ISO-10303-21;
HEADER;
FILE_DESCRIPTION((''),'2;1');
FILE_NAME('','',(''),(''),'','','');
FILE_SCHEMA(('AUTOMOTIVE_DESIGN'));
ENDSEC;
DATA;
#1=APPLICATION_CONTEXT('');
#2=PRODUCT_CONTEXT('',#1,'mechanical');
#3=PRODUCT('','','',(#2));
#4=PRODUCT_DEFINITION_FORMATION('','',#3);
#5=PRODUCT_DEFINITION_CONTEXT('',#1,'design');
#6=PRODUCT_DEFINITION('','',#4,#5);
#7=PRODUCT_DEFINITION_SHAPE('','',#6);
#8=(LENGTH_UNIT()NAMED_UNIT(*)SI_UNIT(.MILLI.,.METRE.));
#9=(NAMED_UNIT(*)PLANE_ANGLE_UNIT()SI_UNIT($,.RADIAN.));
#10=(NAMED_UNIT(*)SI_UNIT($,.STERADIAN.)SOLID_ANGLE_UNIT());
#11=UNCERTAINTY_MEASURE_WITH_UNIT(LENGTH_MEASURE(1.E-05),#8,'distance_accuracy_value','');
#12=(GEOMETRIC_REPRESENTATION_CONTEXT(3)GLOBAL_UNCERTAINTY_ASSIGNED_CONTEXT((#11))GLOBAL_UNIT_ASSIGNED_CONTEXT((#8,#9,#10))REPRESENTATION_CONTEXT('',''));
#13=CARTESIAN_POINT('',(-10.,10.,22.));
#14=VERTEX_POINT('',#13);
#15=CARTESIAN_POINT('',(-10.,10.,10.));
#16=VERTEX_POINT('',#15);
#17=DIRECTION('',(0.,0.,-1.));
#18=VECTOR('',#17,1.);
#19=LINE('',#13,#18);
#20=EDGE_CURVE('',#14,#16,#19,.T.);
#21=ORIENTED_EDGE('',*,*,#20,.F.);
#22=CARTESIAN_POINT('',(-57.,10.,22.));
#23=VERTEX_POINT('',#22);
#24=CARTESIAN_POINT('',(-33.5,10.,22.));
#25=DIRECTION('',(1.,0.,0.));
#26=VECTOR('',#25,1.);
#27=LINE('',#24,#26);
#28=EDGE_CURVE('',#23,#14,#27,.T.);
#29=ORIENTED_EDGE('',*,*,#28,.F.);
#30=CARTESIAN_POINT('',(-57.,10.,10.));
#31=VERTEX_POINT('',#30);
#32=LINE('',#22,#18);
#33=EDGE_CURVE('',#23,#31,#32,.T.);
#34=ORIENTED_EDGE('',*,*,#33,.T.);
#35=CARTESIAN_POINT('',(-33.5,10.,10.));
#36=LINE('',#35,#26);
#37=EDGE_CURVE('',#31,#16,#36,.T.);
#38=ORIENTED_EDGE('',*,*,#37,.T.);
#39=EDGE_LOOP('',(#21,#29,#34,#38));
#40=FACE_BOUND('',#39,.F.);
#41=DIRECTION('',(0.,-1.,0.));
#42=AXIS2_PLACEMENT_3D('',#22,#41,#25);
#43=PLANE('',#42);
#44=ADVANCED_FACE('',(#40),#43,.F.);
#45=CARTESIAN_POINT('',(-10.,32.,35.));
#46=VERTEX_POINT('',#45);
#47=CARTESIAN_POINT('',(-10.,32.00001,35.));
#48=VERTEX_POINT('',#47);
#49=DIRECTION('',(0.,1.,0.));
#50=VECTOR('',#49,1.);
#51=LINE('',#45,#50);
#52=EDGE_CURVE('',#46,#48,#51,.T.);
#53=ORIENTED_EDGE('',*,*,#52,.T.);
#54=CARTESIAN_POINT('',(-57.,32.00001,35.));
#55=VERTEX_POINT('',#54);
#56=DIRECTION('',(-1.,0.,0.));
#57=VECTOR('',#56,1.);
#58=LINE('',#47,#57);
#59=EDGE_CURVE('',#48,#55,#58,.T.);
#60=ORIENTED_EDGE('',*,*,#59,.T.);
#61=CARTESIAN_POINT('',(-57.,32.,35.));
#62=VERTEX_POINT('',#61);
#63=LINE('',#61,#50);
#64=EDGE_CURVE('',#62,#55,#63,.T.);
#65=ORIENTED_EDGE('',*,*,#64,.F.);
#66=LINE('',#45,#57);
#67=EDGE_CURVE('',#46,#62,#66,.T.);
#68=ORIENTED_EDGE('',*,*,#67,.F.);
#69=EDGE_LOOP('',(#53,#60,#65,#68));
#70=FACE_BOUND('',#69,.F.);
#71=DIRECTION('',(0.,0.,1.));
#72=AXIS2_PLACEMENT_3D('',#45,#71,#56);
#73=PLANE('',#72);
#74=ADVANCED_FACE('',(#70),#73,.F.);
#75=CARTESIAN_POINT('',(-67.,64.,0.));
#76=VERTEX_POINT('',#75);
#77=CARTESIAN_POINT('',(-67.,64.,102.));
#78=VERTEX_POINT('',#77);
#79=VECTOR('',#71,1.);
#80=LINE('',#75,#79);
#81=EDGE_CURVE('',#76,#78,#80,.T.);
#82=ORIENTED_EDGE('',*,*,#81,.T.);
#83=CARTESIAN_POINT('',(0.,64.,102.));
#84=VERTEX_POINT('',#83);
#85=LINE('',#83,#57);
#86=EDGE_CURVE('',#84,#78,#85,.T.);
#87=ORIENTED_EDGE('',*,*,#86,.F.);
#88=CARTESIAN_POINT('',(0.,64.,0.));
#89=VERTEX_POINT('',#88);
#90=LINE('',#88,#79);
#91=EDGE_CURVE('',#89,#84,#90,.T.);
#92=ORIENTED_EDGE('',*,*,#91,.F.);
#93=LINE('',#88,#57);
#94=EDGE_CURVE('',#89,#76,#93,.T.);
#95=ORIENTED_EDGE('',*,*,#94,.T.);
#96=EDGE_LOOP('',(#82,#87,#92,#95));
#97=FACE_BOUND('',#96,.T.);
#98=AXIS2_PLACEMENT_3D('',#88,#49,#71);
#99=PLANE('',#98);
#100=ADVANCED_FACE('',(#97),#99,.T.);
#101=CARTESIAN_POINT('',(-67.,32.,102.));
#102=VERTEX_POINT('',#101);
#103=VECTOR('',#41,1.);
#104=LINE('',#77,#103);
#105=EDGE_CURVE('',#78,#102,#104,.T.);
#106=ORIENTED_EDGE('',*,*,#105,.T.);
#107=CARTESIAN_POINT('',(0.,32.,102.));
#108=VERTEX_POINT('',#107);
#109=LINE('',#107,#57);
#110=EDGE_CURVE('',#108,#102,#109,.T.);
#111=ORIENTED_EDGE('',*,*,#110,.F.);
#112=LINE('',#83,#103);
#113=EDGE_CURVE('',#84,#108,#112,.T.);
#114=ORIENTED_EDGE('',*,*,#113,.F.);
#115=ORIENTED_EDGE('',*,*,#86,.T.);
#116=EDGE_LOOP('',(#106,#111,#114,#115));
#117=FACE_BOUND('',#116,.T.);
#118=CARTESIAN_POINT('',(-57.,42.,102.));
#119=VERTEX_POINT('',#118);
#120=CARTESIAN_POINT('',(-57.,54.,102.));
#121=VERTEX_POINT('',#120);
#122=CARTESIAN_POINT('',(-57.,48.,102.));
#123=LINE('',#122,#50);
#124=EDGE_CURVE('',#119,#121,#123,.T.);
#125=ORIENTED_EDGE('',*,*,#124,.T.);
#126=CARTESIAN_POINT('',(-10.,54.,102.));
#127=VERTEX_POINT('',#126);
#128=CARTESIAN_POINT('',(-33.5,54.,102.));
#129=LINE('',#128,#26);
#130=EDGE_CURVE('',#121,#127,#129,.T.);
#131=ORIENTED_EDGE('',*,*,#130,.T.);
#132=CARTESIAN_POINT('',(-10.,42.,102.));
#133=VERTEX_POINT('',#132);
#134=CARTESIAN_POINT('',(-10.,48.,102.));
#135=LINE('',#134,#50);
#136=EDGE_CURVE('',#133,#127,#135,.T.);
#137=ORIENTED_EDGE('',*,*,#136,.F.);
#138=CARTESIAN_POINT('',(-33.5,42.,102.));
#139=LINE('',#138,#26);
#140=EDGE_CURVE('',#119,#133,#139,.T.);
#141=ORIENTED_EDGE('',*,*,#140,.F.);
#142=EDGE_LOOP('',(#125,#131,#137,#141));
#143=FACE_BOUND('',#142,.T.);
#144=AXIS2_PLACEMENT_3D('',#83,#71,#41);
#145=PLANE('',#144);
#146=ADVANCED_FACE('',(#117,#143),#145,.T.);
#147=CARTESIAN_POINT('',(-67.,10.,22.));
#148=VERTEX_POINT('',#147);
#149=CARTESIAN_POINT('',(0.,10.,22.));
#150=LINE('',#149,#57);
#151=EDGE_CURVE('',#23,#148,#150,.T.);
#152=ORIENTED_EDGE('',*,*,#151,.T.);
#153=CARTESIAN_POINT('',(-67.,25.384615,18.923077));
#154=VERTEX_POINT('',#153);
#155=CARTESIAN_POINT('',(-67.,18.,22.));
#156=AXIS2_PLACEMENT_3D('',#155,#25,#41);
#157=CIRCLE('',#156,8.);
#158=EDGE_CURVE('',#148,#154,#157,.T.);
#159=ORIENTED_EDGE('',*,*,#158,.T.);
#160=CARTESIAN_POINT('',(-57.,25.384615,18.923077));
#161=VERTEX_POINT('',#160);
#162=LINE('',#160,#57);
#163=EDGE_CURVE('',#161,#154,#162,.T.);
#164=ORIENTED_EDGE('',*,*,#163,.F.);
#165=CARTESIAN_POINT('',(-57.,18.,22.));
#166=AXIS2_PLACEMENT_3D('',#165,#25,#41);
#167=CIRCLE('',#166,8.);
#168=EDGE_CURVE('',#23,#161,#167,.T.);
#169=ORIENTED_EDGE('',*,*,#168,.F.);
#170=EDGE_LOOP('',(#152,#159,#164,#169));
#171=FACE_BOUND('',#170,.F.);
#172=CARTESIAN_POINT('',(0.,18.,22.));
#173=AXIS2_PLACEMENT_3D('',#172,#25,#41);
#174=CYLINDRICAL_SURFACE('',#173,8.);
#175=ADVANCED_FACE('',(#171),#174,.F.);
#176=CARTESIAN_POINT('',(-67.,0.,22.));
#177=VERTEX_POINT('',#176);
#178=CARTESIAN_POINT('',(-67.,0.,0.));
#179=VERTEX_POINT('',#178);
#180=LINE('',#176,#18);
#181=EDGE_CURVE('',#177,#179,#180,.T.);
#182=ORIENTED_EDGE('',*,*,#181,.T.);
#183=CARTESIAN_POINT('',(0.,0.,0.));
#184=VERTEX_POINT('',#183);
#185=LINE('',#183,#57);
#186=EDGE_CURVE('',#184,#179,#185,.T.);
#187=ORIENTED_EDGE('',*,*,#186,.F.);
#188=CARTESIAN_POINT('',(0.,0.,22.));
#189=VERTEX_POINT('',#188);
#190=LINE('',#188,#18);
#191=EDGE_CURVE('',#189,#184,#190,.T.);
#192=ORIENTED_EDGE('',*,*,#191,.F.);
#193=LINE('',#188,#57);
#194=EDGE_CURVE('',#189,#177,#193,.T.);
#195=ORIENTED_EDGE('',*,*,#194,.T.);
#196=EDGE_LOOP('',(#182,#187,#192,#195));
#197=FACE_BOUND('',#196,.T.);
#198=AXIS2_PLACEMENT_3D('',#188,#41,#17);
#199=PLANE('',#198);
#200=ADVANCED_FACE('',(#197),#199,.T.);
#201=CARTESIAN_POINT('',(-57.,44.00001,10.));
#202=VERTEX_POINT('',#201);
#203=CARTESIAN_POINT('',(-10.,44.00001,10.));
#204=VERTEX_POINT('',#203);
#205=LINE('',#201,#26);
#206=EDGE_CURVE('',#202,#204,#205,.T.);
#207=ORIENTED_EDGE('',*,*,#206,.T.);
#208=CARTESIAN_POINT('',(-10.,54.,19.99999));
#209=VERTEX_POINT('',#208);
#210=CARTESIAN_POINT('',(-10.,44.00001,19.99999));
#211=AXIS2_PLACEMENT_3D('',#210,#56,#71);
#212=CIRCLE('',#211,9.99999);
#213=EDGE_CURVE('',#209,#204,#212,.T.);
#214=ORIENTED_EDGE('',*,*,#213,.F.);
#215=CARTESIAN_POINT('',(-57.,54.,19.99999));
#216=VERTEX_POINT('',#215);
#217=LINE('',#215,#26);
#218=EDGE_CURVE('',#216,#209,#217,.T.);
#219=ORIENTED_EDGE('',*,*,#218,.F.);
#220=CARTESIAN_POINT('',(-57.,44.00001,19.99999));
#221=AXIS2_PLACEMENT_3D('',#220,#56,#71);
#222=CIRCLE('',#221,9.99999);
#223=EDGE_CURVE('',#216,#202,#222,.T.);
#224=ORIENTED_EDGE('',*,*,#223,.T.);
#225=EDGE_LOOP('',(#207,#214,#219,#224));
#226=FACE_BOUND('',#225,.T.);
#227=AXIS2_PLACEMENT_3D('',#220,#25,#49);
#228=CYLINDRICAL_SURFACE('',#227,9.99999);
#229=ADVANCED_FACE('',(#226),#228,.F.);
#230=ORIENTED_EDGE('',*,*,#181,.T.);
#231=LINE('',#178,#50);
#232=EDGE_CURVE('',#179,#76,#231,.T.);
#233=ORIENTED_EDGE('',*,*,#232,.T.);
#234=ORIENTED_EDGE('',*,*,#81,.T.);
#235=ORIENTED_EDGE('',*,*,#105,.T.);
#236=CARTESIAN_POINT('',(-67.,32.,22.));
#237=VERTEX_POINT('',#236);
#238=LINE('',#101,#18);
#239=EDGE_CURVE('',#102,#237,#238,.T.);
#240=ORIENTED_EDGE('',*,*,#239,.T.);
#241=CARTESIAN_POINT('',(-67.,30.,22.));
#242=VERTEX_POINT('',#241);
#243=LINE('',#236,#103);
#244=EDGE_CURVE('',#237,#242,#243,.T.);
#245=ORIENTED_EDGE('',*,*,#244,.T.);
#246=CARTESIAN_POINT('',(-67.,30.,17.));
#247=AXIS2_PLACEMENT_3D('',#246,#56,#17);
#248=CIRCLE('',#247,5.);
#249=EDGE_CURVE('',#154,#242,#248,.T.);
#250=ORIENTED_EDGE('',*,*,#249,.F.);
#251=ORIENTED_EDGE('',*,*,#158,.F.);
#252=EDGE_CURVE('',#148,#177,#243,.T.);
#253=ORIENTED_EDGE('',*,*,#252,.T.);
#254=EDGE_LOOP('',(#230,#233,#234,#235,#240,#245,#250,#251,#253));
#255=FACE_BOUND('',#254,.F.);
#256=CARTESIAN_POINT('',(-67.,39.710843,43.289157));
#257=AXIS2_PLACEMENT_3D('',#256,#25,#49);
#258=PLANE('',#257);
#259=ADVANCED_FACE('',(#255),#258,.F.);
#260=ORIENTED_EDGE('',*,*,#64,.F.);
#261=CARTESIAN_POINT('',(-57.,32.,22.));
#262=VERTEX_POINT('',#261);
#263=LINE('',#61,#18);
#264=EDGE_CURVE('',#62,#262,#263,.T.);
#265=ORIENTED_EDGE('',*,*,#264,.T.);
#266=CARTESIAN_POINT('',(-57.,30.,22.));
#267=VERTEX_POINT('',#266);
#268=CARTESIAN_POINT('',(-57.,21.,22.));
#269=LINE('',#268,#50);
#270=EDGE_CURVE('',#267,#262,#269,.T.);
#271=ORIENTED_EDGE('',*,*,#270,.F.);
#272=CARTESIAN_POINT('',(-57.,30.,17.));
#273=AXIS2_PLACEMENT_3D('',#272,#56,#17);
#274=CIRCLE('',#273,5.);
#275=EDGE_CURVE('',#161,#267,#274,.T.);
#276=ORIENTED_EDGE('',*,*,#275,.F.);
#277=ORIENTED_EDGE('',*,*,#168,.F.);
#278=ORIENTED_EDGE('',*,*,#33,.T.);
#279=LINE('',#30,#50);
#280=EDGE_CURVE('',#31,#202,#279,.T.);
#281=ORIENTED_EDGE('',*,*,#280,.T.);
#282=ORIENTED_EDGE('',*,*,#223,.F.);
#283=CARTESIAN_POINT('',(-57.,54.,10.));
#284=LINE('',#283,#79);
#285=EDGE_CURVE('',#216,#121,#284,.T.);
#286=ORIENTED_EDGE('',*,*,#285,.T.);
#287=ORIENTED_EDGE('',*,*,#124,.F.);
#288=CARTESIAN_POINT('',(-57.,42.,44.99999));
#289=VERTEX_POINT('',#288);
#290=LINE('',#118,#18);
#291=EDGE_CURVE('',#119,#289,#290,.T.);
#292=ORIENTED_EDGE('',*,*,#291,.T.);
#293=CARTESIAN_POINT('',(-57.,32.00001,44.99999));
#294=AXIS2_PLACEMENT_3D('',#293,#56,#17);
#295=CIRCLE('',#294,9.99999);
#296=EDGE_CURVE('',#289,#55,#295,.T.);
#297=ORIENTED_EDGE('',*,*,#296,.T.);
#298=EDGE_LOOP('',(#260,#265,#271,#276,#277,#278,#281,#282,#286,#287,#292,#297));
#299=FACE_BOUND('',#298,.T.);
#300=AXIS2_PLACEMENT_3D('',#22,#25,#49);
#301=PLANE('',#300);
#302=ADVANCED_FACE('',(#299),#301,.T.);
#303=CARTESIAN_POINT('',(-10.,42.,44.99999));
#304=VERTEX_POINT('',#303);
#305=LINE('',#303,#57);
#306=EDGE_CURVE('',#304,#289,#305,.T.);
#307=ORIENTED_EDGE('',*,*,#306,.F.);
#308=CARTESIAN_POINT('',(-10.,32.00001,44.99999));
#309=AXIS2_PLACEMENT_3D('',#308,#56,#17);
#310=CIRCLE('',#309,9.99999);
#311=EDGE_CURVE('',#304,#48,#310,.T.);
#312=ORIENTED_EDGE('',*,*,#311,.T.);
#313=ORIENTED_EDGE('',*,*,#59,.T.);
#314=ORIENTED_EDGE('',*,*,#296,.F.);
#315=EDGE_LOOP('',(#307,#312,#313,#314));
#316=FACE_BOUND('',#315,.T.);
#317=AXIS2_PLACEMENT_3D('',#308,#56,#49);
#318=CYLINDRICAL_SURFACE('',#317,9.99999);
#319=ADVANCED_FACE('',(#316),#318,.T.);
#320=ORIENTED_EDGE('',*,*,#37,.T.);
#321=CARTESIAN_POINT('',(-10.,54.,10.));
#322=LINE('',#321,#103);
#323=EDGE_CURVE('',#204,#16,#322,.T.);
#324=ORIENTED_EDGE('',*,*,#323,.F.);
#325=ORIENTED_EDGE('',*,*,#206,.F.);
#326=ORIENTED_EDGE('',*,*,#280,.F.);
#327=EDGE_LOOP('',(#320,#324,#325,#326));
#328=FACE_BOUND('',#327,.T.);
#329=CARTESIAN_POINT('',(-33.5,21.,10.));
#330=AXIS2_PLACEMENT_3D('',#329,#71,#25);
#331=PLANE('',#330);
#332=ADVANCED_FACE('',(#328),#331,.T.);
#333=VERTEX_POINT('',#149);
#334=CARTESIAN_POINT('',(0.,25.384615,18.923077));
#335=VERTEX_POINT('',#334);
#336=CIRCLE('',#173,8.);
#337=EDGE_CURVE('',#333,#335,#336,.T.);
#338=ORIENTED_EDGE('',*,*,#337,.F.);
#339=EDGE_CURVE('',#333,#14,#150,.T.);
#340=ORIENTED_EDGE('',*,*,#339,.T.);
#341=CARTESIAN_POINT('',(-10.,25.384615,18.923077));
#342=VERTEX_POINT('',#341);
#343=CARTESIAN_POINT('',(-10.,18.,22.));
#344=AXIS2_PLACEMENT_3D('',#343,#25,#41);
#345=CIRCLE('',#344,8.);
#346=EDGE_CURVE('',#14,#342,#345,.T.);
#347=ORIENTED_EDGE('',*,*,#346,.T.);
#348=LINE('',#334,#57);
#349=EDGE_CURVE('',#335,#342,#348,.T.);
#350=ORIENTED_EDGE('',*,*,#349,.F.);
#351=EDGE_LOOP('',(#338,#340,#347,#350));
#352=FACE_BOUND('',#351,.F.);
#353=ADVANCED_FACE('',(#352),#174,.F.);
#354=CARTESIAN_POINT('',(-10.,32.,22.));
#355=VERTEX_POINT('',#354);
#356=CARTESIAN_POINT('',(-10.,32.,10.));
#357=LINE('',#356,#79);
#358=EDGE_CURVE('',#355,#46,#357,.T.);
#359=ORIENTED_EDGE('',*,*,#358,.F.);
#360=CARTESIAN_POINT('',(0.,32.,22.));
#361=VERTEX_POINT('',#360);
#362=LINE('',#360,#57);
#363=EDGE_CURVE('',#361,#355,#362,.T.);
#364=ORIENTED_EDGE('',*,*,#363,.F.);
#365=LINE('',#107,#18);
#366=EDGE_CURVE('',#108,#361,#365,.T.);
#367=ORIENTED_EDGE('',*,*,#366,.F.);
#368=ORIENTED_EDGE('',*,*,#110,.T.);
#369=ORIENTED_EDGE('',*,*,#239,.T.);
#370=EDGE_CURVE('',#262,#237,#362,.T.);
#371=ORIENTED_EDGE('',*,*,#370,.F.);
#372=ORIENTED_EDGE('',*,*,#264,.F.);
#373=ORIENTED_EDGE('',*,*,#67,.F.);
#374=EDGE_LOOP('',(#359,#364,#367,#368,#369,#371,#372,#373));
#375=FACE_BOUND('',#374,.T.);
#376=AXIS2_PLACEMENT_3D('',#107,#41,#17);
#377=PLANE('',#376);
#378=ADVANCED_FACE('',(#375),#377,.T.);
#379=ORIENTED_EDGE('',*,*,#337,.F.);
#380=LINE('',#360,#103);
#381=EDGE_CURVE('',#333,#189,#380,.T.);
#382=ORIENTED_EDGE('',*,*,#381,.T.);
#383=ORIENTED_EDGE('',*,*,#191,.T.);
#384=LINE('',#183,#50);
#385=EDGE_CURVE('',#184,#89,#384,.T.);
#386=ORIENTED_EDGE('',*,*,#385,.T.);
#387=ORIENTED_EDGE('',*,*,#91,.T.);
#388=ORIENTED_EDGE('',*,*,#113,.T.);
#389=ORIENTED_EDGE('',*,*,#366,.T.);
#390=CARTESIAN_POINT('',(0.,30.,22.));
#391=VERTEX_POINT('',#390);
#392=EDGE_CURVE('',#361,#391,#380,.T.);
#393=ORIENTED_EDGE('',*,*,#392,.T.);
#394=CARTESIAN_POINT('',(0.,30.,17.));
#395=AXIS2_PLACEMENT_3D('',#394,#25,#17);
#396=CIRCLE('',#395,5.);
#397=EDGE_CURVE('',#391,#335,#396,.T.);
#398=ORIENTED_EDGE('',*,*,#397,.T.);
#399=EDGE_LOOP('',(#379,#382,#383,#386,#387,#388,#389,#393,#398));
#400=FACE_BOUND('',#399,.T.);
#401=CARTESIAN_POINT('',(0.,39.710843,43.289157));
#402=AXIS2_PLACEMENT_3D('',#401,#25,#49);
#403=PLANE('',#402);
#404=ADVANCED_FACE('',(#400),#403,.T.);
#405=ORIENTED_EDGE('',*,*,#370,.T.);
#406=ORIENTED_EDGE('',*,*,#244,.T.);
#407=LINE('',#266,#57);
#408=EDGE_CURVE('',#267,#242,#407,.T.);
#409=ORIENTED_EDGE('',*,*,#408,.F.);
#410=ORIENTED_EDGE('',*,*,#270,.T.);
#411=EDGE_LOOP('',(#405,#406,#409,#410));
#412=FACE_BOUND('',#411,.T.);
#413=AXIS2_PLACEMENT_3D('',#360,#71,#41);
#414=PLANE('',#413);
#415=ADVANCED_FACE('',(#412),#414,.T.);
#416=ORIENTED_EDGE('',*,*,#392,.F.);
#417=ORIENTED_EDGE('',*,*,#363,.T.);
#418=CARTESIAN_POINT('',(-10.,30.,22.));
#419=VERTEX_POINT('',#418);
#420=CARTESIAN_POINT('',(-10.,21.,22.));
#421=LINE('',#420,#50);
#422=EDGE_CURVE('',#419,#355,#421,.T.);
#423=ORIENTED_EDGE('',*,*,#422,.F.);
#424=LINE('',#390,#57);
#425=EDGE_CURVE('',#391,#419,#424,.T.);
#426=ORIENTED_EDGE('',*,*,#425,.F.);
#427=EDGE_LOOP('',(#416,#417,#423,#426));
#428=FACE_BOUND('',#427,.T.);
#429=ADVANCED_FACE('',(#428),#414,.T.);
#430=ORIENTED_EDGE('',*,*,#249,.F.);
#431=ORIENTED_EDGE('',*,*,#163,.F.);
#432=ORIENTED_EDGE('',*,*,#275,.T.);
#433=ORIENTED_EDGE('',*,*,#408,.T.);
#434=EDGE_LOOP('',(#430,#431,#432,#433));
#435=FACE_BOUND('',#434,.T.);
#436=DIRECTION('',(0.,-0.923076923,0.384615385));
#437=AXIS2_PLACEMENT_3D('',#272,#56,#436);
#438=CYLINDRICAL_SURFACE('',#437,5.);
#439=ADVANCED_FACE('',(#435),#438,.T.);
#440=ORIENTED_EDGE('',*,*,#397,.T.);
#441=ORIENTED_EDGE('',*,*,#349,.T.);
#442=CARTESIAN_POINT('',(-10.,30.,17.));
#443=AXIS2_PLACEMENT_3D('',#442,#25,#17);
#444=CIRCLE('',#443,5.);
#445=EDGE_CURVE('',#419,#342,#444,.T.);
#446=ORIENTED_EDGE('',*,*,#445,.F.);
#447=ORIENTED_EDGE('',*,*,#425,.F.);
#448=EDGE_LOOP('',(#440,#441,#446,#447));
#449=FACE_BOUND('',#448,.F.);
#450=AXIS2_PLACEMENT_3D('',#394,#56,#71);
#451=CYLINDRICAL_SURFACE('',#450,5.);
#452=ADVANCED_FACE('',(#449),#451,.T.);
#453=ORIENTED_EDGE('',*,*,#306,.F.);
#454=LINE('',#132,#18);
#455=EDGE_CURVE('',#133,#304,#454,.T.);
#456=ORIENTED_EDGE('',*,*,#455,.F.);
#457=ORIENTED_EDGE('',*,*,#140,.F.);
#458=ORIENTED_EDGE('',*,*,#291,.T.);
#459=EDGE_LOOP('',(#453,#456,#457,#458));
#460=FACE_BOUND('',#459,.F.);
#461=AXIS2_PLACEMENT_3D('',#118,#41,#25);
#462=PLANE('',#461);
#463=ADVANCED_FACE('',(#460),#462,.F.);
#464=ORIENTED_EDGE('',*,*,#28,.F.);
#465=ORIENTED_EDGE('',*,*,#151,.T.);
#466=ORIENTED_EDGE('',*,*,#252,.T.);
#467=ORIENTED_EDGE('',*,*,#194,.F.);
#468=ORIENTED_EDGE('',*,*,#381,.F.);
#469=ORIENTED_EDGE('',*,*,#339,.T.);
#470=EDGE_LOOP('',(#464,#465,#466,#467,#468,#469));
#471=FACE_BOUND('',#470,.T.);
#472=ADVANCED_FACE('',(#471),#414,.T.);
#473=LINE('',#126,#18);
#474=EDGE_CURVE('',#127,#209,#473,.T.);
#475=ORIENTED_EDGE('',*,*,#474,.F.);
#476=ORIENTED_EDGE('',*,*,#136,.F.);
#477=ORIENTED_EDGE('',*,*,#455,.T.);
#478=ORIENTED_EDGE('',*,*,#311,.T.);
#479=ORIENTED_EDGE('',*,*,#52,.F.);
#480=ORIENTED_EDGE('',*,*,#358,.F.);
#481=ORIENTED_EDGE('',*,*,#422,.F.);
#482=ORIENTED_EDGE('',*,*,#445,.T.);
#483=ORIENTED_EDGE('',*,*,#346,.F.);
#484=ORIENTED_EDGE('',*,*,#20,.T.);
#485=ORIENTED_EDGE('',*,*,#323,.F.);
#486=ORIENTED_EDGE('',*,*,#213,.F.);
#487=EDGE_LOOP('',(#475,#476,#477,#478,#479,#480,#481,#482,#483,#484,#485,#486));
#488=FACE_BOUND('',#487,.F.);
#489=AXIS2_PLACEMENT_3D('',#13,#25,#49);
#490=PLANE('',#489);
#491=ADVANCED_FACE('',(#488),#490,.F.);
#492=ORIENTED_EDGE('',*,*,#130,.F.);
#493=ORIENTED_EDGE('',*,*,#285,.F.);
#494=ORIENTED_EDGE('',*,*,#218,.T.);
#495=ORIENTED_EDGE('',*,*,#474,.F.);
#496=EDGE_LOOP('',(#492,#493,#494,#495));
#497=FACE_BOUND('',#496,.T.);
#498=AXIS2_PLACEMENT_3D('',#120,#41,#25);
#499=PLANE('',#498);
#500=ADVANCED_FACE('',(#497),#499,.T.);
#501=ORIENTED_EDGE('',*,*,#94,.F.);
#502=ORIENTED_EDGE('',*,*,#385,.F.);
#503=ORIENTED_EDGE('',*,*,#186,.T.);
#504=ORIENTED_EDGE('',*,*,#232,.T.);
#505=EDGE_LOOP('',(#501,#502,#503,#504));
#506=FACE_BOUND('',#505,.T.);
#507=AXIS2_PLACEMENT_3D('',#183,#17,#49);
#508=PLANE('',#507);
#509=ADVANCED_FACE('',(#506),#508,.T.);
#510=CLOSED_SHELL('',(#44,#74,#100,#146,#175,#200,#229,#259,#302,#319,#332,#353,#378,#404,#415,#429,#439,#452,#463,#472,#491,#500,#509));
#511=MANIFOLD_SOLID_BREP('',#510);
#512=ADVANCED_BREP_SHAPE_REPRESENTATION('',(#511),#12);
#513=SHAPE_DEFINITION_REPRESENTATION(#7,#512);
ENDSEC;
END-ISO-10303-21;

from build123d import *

# Parameters (mm, degrees)
F1_DEPTH  = 67
F2_W      = 47
F2_H      = 12
F3_DEPTH  = 92
F4_DEPTH  = 92
F5_W      = 47
F5_H      = 22
F6_DEPTH  = 12
F8_DEPTH  = 22
F9_R      = 9.99999
F11_DEPTH = 83
F12_R     = 5


# Not quite as in the source:
# - a fillet or chamfer is up to 0.001 mm smaller than in the source, because OpenCascade refuses the exact size


with BuildPart() as f1:
    # F0 (on Right) → F1 (new body)
    with BuildSketch(Plane.YZ):
        Polygon((0, 22), (0, 0), (64, 0), (64, 22), (64, 102), (32, 102), (32, 22), align=None)
    extrude(amount=-F1_DEPTH)

    # F2 (on face) → F3 (join)
    with BuildSketch(Plane.XY.offset(102)):
        with Locations((-33.5, 48)):
            Rectangle(F2_W, F2_H)
    extrude(amount=-F3_DEPTH)

    # F2 (on face) → F4 (cut)
    with BuildSketch(Plane.XY.offset(102)):
        with Locations((-33.5, 48)):
            Rectangle(F2_W, F2_H)
    extrude(amount=-F4_DEPTH, mode=Mode.SUBTRACT)

    # F5 (on face) → F6 (cut)
    with BuildSketch(Plane.XY.offset(22)):
        with Locations((-33.5, 21)):
            Rectangle(F5_W, F5_H)
    extrude(amount=-F6_DEPTH, mode=Mode.SUBTRACT)

    # F7 (on face) → F8 (cut)
    with BuildSketch(Plane.XZ.offset(-32)):
        Polygon((-57, 22), (-57, 10), (-10, 10), (-10, 22), (-10, 35), (-57, 35), align=None)
    extrude(amount=-F8_DEPTH, mode=Mode.SUBTRACT)

    # F9 (radius 10 in the source; OpenCascade refuses exactly that, so slightly less here)
    f9_edges = [f1.edges().sort_by_distance(p)[0] for p in [
        (-33.5, 54, 10),
        (-33.5, 42, 35),
    ]]
    fillet(f9_edges, radius=F9_R)

    # F10 (on face) → F11 (cut)
    with BuildSketch(Plane.YZ):
        with BuildLine():
            ThreePointArc((10, 22), (18, 14), (26, 22))
            Line((26, 22), (10, 22))
        make_face()
    extrude(amount=-F11_DEPTH, mode=Mode.SUBTRACT)

    # F12
    f12_edges = [f1.edges().sort_by_distance(p)[0] for p in [
        (-5, 26, 22),
        (-62, 26, 22),
    ]]
    fillet(f12_edges, radius=F12_R)


solid = f1.part
